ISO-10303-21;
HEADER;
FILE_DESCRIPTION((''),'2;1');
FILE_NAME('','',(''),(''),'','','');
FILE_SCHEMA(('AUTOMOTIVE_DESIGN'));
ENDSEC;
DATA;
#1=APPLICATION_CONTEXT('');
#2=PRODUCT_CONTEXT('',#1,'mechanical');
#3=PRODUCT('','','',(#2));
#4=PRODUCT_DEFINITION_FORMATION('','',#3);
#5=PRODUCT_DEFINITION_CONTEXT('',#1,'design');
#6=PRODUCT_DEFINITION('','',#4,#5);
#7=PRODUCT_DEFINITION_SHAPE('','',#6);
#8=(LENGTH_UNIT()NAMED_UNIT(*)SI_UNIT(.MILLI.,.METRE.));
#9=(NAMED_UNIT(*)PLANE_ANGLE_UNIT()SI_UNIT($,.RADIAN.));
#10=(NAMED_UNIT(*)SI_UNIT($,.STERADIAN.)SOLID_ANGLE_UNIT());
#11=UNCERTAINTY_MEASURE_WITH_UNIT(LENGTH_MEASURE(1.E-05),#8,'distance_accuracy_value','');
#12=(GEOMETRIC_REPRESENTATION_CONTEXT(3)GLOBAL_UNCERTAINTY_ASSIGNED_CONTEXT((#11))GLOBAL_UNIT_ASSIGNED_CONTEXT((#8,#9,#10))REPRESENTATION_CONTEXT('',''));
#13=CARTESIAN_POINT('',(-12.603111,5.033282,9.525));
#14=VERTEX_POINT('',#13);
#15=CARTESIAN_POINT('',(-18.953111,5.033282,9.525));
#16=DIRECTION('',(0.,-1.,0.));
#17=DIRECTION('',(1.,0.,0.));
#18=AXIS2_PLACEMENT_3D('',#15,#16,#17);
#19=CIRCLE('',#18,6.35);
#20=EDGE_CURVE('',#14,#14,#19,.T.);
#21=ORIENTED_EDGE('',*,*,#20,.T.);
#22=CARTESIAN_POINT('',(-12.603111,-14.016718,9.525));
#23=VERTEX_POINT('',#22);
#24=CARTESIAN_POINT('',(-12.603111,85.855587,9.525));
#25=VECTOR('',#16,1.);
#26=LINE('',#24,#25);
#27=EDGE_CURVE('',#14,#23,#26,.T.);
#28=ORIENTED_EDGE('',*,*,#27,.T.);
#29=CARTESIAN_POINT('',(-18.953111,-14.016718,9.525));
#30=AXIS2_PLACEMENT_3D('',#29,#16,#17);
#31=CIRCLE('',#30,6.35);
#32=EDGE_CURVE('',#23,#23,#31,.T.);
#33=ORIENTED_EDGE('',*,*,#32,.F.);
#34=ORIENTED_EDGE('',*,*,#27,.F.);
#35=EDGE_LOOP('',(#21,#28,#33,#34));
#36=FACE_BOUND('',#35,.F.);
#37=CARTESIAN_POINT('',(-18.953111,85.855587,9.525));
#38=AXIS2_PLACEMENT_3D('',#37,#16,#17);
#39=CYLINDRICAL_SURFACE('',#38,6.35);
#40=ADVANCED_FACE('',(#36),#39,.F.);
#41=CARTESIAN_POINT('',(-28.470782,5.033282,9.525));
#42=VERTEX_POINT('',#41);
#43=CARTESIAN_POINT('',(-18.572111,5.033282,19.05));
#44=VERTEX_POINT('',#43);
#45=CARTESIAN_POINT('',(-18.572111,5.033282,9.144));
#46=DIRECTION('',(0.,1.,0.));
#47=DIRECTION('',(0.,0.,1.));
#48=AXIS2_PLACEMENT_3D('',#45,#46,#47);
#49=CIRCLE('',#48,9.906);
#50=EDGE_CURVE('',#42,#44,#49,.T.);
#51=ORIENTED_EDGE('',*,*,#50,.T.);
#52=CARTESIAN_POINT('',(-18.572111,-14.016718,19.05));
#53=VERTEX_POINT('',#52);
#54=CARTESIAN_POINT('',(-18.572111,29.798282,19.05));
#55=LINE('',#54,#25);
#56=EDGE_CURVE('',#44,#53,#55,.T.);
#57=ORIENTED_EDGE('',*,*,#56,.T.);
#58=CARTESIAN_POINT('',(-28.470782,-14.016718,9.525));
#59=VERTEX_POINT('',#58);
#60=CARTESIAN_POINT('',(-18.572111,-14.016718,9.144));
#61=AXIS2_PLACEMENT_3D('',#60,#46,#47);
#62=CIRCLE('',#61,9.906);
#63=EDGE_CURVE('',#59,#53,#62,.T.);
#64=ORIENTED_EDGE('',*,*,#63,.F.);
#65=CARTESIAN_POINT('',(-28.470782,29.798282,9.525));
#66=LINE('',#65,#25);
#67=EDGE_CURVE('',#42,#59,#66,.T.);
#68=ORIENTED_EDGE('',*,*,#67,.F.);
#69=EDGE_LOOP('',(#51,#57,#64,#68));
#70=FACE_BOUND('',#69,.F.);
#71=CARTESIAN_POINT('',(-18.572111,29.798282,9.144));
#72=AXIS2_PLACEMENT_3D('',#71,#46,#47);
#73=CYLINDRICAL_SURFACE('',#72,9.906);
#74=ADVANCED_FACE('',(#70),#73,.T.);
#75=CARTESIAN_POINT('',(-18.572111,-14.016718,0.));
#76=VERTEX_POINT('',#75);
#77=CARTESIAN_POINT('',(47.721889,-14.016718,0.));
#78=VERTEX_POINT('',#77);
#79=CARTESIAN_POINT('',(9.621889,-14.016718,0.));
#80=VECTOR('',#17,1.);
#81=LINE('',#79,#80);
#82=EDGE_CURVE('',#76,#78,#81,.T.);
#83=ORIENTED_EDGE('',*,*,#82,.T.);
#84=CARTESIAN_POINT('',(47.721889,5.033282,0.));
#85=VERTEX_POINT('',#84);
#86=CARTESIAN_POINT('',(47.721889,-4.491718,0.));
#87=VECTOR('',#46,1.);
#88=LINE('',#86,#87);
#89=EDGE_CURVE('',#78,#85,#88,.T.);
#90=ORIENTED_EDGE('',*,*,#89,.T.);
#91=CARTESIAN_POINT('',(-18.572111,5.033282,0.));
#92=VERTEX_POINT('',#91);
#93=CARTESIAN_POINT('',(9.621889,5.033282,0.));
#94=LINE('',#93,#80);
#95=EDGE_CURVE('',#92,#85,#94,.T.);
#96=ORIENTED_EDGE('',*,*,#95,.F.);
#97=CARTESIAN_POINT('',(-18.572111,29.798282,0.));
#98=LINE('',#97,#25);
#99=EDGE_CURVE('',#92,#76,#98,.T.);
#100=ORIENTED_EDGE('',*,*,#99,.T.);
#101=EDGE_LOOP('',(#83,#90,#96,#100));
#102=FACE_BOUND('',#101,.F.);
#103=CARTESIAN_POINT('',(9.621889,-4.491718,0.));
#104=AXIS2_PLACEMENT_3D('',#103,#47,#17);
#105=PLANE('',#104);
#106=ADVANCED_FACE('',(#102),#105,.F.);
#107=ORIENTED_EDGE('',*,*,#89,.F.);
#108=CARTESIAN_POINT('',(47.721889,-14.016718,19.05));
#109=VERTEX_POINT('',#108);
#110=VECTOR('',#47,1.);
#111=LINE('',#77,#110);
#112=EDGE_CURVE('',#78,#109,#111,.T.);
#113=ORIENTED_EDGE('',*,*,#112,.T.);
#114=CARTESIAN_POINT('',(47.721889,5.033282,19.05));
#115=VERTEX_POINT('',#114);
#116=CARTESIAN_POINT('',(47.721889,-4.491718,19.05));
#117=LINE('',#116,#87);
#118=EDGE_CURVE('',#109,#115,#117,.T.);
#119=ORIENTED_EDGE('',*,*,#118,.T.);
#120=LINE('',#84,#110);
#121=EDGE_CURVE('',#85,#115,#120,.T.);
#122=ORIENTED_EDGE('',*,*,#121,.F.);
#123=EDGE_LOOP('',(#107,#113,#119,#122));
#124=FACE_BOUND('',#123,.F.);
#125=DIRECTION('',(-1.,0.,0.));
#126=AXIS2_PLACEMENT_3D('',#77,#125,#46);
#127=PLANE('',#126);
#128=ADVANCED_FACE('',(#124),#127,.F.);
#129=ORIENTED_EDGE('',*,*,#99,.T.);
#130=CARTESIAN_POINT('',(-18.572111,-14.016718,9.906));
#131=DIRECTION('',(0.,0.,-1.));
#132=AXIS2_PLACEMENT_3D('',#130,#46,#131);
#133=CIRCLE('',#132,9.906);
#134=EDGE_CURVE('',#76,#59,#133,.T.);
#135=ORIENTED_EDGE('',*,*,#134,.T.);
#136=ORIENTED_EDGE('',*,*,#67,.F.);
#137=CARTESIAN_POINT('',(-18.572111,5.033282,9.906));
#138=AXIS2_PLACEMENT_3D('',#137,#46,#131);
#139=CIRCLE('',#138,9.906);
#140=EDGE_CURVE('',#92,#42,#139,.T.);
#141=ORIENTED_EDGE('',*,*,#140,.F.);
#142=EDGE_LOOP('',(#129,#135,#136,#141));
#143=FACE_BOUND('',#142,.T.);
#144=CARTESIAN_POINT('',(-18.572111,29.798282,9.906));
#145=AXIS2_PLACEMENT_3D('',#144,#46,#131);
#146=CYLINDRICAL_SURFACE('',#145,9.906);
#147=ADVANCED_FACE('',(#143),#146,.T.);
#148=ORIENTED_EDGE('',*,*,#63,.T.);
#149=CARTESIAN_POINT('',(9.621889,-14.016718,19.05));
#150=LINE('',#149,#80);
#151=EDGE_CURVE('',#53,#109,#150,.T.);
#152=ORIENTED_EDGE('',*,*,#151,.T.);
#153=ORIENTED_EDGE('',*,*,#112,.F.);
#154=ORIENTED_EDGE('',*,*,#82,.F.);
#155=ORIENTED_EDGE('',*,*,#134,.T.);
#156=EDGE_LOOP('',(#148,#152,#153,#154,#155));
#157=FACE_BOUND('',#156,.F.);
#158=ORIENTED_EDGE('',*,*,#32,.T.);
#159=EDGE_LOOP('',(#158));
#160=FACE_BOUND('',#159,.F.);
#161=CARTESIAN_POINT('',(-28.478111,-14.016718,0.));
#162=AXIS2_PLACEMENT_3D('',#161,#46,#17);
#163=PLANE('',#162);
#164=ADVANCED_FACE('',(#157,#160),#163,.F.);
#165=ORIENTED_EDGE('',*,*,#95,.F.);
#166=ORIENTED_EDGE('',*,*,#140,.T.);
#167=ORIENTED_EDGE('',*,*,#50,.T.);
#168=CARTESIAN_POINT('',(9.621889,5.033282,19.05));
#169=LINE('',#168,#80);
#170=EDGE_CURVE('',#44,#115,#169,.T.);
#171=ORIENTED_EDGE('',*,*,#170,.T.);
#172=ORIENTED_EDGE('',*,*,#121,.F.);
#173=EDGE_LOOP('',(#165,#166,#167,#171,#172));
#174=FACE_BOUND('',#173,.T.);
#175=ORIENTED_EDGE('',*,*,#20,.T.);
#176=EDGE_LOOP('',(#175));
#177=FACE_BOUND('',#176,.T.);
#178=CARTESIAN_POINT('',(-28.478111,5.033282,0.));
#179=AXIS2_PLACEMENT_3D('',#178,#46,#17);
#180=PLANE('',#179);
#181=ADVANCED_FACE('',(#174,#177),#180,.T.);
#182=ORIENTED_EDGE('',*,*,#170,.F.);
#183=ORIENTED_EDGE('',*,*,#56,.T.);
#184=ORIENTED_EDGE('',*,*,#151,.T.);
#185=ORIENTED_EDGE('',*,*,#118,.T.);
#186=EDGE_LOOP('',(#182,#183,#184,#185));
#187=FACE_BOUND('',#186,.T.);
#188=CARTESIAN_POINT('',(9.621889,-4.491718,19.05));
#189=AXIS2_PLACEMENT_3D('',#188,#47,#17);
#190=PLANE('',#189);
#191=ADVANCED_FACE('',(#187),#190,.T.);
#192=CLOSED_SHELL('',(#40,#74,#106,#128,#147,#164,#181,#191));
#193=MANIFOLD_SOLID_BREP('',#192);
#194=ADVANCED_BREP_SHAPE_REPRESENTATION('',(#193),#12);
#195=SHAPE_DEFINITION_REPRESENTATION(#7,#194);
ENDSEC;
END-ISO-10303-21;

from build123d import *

# Parameters (mm, degrees)
F0_W        = 76.2
F0_H        = 19.05
F1_DEPTH    = 19.05
F3_D        = 12.7
F4_T1_DEPTH = 68.58


# Not quite as in the source:
# - a fillet or chamfer that OpenCascade refuses, or shapes differently, is made with other operations: its cross-section is extruded or revolved along the edge and cut away or added


with BuildPart() as f1:
    # F0 (on Top) → F1 (new body)
    with BuildSketch(Plane.XY):
        with Locations((9.6218887268, -4.4917178258)):
            Rectangle(F0_W, F0_H)
    extrude(amount=F1_DEPTH)

    # F3 (through all)
    with Locations(Plane(origin=(0, 5.0332821742, 0), x_dir=(-1, 0, 0), z_dir=(0, 1, 0))):
        with Locations((18.9531112732, 9.525)):
            Hole(F3_D / 2)

    # F4: fillet of radius 9.906 on 2 edges, made by hand

    # F4_s2 → F4_t1 (cut)
    with BuildSketch(Plane.XZ.offset(-29.7982821742)):
        with BuildLine():
            ThreePointArc((-18.5721112732, 19.05), (-25.5767110476, 16.1485997744), (-28.4781112732, 9.144))
            Line((-28.4781112732, 9.144), (-28.4781112732, 19.05))
            Line((-28.4781112732, 19.05), (-18.5721112732, 19.05))
        make_face()
        with BuildLine():
            ThreePointArc((-18.5721112732, 0), (-25.5767110476, 2.9014002256), (-28.4781112732, 9.906))
            Line((-28.4781112732, 9.906), (-28.4781112732, 0))
            Line((-28.4781112732, 0), (-18.5721112732, 0))
        make_face()
    extrude(amount=F4_T1_DEPTH, mode=Mode.SUBTRACT)


solid = f1.part
